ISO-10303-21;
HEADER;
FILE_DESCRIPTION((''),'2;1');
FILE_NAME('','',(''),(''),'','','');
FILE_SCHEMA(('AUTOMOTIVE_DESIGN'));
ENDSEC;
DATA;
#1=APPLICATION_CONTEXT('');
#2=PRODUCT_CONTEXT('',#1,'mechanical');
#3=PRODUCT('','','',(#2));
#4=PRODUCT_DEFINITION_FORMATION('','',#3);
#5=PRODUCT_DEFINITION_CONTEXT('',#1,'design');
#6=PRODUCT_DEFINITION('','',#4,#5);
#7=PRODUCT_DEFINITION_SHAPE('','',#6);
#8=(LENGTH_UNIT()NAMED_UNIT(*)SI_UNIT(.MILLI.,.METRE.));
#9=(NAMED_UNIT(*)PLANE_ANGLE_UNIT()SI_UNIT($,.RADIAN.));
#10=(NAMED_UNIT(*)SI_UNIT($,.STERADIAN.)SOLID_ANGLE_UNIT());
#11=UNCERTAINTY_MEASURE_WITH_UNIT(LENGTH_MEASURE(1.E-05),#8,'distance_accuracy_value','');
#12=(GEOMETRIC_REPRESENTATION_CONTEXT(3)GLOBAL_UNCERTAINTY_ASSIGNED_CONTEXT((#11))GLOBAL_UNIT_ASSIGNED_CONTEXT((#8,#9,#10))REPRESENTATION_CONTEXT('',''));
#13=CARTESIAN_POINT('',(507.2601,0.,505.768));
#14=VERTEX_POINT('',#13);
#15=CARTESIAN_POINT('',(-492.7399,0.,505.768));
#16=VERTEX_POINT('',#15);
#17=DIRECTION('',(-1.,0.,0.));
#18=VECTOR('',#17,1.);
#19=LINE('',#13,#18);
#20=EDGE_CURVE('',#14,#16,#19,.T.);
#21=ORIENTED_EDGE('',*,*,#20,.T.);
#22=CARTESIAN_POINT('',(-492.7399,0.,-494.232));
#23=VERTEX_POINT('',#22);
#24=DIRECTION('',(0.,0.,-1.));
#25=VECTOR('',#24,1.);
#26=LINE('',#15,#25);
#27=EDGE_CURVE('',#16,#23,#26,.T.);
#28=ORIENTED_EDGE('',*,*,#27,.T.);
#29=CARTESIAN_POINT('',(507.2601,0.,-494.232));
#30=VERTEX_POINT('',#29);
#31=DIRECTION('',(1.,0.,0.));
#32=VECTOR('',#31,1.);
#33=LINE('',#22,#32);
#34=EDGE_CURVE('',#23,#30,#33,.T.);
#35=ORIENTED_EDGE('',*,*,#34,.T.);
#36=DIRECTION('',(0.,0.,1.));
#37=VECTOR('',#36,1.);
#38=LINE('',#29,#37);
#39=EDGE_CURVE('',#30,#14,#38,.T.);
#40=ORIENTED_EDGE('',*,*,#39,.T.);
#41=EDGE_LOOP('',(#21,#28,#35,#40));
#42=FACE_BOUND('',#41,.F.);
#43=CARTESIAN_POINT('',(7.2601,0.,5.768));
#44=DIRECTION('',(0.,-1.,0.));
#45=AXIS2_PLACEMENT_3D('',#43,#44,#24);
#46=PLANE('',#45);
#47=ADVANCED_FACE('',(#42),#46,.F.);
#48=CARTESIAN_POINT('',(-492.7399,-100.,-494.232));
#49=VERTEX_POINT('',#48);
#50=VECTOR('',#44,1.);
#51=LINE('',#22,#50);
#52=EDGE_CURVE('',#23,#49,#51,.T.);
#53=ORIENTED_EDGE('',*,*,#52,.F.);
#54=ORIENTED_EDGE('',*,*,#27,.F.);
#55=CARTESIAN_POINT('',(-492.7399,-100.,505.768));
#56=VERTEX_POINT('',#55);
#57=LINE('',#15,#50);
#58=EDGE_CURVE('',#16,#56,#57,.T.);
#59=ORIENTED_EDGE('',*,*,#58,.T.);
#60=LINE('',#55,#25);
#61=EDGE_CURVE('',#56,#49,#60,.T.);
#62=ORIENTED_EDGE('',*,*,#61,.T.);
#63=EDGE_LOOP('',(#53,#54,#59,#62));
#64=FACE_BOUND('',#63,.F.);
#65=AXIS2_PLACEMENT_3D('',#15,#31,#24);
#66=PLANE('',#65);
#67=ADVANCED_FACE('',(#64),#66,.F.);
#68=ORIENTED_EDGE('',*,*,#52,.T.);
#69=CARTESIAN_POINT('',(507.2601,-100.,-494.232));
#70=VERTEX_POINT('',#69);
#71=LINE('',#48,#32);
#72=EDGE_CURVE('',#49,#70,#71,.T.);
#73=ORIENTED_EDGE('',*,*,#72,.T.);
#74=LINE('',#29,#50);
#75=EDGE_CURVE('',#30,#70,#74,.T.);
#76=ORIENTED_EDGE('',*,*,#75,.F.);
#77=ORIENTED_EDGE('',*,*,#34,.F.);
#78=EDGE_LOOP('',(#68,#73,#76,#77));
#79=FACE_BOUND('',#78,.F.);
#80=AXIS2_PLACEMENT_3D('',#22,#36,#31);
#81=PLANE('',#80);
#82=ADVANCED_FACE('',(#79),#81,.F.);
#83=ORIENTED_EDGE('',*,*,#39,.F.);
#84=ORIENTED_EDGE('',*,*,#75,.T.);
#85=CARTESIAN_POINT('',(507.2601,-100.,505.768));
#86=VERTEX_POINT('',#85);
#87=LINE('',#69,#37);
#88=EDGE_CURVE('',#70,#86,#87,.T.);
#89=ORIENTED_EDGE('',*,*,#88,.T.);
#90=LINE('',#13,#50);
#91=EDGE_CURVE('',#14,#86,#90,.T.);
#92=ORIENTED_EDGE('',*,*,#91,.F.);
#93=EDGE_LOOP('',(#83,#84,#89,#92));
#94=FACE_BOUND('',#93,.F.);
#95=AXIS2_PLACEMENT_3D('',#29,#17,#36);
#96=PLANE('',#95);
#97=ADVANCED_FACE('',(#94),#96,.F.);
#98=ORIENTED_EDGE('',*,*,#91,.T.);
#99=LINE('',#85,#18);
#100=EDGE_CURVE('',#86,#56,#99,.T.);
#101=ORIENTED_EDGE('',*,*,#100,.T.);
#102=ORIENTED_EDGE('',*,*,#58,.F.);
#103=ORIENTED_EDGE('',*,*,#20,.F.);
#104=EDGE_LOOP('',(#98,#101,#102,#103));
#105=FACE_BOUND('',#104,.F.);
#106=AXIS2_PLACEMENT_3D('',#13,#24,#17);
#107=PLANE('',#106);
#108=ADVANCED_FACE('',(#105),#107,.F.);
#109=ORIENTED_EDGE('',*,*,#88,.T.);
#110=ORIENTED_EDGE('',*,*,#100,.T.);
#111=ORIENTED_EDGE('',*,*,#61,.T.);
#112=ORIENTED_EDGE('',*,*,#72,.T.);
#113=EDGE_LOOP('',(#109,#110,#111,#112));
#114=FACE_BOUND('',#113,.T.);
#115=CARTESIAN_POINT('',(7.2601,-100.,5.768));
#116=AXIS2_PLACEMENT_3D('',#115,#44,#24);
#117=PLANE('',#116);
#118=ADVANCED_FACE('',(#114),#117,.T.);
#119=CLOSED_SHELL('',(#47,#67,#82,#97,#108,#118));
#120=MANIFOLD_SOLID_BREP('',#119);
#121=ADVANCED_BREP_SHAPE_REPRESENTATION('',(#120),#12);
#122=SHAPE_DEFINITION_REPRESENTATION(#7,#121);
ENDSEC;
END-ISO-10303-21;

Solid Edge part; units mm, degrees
sketch "Sketch1" plane through (7.2601, 0, 5.768) normal (0, -1, 0) x (1, 0, 0)
  line L0 (-500, -500) -> (500, -500)
  line L1 (500, -500) -> (500, 500)
  line L2 (500, 500) -> (-500, 500)
  line L3 (-500, 500) -> (-500, -500)
extrude "Protrusion1" add sketch "Sketch1" along normal blind 100
